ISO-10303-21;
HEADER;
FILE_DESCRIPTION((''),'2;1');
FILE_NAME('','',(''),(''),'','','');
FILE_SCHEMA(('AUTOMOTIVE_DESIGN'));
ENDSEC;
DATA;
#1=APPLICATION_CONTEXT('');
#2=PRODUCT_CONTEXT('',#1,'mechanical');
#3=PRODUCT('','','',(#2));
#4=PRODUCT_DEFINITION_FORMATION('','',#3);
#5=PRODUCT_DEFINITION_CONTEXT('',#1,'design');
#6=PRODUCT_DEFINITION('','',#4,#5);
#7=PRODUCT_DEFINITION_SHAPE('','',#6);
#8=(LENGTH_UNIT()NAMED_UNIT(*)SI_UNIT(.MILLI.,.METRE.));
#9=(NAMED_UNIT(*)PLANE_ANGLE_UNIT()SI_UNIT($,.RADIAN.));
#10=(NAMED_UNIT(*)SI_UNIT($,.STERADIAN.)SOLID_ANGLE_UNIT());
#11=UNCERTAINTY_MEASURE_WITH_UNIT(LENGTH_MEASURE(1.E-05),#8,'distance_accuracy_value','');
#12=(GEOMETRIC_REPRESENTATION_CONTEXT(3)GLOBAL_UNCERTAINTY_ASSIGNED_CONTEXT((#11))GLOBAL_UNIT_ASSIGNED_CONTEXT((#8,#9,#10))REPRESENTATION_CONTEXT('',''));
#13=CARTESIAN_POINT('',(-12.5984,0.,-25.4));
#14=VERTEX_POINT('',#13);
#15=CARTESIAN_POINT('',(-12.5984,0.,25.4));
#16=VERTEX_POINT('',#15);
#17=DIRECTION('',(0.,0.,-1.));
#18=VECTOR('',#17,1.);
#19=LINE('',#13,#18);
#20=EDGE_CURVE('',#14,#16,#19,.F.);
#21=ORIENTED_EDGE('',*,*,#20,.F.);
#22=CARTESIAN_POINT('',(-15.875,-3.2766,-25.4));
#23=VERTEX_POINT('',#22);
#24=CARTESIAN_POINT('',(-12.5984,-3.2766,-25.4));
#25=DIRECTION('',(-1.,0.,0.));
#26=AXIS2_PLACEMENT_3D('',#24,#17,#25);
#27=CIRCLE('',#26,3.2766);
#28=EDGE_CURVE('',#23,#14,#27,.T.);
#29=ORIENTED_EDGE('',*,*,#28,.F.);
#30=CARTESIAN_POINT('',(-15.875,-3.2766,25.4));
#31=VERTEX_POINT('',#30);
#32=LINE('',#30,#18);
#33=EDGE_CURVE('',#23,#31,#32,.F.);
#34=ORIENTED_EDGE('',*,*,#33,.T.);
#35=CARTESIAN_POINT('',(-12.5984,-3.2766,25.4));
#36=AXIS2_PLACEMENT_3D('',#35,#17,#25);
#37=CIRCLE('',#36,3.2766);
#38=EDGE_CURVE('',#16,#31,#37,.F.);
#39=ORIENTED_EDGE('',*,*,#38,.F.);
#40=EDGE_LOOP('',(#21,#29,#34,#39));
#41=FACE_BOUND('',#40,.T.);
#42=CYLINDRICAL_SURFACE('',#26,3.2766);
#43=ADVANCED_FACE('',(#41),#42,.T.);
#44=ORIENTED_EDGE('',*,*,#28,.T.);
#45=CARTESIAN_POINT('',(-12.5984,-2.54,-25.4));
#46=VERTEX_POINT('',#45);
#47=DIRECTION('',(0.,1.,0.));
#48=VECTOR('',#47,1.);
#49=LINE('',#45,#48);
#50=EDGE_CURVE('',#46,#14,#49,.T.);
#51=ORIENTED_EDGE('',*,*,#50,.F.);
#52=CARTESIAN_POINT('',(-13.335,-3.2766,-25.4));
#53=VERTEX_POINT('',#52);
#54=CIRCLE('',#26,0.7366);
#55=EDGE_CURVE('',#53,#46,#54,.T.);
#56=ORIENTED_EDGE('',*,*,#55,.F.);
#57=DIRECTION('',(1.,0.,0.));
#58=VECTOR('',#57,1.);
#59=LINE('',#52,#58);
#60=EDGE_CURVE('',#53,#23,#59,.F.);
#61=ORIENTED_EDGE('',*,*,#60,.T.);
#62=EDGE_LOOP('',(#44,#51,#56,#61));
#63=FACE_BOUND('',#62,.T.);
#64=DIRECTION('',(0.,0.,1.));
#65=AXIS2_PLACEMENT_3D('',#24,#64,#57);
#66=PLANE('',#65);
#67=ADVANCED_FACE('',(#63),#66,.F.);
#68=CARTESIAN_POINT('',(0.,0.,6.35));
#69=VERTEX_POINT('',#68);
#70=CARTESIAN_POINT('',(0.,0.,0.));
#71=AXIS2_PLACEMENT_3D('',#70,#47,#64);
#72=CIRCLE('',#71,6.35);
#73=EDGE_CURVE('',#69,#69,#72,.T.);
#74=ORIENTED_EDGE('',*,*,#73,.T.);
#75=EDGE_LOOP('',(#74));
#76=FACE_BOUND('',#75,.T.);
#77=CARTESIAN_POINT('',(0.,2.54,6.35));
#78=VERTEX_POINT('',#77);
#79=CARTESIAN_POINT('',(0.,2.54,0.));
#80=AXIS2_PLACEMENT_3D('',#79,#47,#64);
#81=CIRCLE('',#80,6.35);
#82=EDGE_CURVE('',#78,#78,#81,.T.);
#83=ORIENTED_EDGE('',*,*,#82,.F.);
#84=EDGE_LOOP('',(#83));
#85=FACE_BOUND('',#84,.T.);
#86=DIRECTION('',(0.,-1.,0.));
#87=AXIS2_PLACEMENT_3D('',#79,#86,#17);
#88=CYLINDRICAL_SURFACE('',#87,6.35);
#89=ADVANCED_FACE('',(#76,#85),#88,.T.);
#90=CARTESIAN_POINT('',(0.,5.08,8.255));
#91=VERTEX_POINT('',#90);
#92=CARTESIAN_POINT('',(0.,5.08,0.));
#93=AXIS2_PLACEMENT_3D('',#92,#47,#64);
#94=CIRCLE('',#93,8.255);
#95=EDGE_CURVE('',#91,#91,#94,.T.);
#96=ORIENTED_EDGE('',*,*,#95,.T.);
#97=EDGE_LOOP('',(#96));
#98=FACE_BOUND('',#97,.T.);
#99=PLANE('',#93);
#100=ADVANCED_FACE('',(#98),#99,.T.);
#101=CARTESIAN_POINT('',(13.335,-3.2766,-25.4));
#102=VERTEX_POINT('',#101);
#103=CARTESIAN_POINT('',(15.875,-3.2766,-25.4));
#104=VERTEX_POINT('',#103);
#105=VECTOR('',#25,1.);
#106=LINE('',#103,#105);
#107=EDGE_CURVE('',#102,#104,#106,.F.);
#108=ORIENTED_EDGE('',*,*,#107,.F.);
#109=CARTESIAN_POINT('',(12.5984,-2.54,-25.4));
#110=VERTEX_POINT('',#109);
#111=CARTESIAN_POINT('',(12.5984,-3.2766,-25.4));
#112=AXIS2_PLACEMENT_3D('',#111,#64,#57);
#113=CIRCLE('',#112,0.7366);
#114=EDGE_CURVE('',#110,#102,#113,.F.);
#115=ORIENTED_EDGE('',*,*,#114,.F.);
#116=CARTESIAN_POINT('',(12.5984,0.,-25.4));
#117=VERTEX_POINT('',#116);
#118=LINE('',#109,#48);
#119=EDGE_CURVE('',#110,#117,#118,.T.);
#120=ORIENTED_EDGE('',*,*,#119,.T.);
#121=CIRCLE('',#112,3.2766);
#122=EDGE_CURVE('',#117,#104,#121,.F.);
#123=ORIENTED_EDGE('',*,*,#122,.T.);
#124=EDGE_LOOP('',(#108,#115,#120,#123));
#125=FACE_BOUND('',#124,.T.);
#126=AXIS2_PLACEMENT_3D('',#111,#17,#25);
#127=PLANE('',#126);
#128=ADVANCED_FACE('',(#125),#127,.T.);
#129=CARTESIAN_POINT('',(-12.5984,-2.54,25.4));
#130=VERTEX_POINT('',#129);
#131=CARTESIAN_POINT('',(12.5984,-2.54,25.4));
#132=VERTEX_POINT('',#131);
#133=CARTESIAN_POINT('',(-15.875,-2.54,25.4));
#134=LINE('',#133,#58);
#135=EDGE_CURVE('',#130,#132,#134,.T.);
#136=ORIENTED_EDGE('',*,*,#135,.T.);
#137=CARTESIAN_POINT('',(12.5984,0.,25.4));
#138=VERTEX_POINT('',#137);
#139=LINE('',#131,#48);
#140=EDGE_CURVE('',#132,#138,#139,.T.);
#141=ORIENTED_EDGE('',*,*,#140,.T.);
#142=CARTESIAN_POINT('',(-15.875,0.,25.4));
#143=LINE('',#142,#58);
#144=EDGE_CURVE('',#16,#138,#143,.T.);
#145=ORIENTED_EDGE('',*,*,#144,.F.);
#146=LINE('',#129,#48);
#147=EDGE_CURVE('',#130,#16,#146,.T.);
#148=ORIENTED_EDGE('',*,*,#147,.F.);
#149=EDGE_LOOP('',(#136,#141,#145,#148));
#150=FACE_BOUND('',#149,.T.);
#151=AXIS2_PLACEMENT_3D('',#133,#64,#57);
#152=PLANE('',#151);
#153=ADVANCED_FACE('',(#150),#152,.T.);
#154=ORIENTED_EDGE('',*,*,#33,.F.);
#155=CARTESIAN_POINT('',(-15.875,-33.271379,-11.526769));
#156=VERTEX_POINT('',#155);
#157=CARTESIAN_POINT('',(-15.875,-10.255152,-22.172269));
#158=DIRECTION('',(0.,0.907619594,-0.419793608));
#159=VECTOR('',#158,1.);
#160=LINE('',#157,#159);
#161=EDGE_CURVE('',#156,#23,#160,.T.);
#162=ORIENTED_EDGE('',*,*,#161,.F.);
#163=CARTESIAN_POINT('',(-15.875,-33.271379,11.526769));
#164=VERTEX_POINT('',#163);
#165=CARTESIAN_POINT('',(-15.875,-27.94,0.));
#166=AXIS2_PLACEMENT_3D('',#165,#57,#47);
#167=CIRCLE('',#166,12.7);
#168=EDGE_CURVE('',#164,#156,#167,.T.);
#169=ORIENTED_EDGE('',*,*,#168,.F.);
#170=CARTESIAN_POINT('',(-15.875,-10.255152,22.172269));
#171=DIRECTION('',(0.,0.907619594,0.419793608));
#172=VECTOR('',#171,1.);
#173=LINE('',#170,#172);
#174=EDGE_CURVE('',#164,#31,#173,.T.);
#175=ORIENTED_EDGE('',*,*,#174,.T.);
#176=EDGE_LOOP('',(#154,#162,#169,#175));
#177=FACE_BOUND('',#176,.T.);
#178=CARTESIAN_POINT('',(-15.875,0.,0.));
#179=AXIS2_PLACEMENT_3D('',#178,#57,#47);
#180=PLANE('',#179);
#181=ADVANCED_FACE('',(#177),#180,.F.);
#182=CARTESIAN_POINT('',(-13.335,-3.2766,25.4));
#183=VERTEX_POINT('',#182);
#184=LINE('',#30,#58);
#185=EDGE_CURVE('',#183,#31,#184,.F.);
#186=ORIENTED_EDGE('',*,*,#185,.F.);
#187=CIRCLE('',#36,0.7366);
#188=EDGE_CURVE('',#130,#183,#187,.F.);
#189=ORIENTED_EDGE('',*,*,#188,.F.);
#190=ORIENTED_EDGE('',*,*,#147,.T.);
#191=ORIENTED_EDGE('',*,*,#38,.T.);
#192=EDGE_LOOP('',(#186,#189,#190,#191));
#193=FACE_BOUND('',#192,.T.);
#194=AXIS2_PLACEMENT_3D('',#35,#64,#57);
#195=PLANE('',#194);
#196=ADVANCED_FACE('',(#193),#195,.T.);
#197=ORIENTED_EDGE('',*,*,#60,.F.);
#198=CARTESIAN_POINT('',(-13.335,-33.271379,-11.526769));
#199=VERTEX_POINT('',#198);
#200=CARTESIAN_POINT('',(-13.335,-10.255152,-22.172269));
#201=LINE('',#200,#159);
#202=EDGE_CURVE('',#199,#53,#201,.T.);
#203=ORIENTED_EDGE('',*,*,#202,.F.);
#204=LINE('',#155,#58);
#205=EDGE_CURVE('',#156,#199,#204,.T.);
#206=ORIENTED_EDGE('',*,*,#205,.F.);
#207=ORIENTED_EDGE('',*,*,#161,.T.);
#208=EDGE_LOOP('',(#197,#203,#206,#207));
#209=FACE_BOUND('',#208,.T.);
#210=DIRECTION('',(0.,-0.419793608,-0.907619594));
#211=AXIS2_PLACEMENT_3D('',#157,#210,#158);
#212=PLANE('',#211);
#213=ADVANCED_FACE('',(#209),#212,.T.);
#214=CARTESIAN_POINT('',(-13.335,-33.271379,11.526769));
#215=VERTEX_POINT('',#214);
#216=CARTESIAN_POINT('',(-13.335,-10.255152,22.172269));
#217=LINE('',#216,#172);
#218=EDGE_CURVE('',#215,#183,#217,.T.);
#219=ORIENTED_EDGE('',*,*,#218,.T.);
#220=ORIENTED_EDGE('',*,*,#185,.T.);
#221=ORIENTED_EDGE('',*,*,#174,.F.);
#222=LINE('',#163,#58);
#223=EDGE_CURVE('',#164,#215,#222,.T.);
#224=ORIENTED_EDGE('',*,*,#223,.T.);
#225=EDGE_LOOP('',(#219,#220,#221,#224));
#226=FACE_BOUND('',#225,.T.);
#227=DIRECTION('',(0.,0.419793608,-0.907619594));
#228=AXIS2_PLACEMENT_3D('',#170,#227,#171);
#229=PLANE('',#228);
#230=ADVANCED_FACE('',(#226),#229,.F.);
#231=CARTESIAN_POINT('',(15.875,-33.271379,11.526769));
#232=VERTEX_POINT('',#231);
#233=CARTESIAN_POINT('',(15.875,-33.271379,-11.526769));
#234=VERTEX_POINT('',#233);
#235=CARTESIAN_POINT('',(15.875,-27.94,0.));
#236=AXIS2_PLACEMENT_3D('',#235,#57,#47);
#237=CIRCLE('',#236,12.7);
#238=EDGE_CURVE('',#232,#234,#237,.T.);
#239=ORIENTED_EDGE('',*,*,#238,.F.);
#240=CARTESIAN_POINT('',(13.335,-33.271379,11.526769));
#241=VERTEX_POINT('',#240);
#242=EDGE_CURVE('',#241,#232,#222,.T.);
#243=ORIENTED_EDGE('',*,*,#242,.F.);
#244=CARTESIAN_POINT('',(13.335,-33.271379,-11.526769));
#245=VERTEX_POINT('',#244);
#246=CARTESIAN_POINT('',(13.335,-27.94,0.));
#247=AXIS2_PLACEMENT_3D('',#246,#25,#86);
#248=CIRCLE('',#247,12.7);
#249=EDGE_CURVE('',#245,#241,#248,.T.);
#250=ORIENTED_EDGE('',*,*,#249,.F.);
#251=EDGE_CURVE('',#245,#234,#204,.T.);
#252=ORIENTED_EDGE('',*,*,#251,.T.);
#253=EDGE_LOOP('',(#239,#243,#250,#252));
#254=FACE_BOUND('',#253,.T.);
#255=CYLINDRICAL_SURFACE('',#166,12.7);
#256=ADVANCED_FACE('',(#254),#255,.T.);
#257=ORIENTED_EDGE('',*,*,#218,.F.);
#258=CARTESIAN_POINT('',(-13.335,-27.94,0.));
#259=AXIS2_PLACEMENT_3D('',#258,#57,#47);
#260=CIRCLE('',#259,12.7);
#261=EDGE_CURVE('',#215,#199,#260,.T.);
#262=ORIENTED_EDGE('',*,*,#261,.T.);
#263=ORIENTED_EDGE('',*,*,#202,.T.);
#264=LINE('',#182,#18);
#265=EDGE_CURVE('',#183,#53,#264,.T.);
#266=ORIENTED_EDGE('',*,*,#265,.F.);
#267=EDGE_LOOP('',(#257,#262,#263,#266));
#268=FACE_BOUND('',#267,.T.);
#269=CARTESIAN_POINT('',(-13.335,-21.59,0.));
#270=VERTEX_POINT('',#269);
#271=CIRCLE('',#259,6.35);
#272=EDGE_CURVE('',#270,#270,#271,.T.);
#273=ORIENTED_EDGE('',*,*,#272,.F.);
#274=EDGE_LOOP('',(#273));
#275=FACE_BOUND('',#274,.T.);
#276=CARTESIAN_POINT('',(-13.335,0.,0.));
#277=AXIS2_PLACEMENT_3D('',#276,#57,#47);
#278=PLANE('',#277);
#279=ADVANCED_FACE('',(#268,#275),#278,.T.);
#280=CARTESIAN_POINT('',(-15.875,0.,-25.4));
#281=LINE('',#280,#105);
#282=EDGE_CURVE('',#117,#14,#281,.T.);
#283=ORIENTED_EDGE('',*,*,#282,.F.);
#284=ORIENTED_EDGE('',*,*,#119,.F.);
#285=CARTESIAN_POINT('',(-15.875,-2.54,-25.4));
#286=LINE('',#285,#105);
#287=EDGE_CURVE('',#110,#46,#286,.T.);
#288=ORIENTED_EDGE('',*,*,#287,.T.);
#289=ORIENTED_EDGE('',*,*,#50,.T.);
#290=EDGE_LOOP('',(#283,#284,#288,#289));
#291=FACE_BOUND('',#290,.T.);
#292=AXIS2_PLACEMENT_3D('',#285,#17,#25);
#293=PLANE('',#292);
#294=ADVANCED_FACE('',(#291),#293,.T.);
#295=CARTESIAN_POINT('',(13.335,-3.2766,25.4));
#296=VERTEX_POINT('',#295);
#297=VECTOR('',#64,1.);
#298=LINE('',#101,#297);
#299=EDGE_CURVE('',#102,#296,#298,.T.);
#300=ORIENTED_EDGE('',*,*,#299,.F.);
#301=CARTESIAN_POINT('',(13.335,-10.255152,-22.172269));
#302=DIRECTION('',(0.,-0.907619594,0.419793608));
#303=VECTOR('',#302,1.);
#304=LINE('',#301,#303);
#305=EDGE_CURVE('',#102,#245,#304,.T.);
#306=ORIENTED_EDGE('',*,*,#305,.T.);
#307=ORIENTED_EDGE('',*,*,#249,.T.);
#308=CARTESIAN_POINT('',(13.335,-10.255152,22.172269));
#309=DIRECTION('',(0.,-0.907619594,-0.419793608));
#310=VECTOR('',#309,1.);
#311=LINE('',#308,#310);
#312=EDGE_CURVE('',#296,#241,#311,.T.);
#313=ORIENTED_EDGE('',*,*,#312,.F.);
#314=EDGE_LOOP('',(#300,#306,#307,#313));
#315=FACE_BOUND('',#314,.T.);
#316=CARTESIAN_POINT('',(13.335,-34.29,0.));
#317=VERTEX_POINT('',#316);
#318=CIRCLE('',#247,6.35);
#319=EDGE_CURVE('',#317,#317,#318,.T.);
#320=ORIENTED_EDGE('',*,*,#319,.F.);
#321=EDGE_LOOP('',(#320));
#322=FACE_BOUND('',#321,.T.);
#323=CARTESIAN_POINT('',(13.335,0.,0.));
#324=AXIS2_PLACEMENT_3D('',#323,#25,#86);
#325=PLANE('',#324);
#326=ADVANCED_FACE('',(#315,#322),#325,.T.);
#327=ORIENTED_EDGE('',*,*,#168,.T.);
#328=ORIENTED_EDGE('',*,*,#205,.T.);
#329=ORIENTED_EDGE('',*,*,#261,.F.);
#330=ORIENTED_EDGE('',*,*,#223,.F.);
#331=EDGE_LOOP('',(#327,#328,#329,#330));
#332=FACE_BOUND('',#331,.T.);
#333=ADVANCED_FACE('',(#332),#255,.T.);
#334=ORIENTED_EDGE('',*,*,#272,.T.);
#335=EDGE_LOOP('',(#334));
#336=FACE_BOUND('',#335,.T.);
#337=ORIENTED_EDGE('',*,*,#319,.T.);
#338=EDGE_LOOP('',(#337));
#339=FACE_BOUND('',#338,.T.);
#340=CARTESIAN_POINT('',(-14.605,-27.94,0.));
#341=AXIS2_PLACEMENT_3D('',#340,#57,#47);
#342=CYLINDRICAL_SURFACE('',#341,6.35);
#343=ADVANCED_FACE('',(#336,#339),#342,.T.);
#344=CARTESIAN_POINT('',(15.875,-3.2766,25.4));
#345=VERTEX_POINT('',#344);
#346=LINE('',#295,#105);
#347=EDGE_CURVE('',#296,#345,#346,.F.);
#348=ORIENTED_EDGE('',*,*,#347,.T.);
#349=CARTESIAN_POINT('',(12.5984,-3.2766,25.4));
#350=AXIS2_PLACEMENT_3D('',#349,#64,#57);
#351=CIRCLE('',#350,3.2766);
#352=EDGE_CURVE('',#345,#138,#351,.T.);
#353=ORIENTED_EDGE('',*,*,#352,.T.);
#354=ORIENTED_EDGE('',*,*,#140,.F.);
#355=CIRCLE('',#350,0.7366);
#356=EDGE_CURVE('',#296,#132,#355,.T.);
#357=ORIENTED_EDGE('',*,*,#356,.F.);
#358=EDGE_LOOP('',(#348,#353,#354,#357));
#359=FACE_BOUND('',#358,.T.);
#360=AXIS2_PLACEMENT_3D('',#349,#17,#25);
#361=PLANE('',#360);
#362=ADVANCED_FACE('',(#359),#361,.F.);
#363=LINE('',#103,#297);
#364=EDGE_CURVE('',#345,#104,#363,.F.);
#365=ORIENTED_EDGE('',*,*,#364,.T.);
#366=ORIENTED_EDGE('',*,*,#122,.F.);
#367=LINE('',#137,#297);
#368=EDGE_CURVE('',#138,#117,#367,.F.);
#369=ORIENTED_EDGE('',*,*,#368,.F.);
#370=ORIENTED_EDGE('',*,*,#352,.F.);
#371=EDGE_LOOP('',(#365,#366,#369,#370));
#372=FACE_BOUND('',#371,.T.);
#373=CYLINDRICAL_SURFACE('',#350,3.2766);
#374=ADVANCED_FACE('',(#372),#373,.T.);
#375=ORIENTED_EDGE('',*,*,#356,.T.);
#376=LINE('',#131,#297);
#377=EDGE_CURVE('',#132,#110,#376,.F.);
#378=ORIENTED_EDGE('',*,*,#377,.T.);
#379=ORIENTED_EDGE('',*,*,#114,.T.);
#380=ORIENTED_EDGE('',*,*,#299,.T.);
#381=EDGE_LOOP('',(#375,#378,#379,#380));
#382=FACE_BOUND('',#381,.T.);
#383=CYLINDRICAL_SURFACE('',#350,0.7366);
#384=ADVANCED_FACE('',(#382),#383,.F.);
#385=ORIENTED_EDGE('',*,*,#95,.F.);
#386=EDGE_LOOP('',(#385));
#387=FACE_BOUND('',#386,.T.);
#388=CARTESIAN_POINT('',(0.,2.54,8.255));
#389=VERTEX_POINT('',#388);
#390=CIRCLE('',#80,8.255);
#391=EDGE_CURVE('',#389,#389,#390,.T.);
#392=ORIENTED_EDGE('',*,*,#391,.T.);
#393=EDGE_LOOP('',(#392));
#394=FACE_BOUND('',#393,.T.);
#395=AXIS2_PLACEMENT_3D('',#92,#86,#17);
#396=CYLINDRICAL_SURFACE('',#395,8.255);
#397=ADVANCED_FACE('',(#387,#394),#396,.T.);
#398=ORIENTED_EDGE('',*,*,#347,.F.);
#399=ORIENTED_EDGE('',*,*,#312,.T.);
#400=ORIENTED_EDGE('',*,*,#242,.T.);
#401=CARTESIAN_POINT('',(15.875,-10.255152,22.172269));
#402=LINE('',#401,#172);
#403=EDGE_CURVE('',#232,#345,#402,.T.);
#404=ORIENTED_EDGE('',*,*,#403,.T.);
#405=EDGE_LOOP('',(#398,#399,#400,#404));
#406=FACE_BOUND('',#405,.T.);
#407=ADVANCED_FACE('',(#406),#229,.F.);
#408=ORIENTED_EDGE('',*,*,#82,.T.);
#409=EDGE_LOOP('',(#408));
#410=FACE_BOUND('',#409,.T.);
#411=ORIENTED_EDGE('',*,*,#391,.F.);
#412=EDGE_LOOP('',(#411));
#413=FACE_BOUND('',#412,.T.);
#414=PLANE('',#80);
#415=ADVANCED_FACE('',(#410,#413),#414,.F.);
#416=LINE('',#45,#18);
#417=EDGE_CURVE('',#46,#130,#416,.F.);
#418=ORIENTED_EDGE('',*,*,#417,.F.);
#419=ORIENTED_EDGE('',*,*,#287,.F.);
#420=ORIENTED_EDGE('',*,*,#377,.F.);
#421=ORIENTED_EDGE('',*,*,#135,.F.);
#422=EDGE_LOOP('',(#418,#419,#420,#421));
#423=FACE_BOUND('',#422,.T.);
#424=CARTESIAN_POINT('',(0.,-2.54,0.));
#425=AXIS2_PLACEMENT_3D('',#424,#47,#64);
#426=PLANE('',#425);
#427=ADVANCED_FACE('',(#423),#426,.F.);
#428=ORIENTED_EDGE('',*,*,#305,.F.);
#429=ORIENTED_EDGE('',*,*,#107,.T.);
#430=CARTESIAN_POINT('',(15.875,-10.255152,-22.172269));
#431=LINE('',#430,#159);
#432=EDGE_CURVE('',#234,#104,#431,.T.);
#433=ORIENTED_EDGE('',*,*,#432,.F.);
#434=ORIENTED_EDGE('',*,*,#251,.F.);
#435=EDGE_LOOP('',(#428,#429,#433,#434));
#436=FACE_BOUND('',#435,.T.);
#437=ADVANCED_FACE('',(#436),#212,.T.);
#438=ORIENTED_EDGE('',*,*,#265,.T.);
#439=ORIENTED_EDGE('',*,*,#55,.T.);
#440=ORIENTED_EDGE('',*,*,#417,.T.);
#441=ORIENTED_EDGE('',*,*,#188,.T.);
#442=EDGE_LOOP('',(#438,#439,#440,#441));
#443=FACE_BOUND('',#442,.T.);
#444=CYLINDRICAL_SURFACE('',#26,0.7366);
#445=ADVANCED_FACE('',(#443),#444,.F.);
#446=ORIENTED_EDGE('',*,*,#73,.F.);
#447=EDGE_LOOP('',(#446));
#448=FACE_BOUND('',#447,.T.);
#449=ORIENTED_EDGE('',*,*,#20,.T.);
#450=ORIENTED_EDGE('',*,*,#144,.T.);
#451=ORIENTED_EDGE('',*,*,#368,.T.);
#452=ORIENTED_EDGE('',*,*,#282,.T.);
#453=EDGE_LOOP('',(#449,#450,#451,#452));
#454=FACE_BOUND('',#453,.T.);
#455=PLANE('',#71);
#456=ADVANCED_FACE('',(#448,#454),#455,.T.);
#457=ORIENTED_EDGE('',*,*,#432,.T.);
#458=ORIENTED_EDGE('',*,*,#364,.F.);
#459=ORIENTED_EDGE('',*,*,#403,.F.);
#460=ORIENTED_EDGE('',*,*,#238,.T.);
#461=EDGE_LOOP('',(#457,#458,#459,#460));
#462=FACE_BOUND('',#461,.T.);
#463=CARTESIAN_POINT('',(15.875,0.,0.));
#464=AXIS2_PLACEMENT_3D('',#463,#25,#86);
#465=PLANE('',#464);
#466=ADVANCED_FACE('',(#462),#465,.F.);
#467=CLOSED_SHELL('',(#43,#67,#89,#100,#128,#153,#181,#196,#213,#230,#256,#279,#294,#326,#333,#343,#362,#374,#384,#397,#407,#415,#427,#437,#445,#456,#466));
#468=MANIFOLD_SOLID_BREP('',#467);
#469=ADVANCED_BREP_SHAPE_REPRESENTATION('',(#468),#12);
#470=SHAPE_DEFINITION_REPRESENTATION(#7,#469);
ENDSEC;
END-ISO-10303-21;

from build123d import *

# Parameters (mm, degrees)
SKETCH2_W                      = 31.75
SKETCH2_H                      = 50.8
BASE_FLANGE1_DEPTH             = 2.54
EDGE_FLANGE1_STRIP_W           = 11.6332
EDGE_FLANGE1_STRIP_H           = 2.54
EDGE_FLANGE1_STRIP_CUT_DEPTH   = 50.8
EDGE_FLANGE1_STRIP_2_W         = 11.6332
EDGE_FLANGE1_STRIP_2_H         = 2.54
EDGE_FLANGE1_STRIP_CUT_2_DEPTH = 50.8
EDGE_FLANGE1_DEPTH             = 50.8
EDGE_FLANGE1_BEND_DEPTH        = 50.8
CUT_EXTRUDE1_DEPTH             = 58.487669113
BOSS_EXTRUDE1_START            = -2.54
SKETCH14_R                     = 6.35
BOSS_EXTRUDE1_DEPTH            = 27.94
SKETCH15_R                     = 6.35
BOSS_EXTRUDE2_DEPTH            = 2.54
SKETCH16_R                     = 8.255
BOSS_EXTRUDE3_DEPTH            = 2.54


# Sheet-metal steps are written as plain solids
with BuildPart() as part:
    # Sketch2 → Base-Flange1 (new body)
    with BuildSketch(Plane(origin=(0, 0, 0), x_dir=(1, 0, 0), z_dir=(0, 1, 0))):
        Rectangle(SKETCH2_W, SKETCH2_H)
    extrude(amount=-BASE_FLANGE1_DEPTH)

    # Edge-Flange1 strip (across the edge) → Edge-Flange1 strip cut (cut)
    with BuildSketch(Plane(origin=(15.875, -2.54, -25.4), x_dir=(-1, 0, 0), z_dir=(0, 0, 1))):
        with Locations((-2.54, -1.27)):
            Rectangle(EDGE_FLANGE1_STRIP_W, EDGE_FLANGE1_STRIP_H)
    extrude(amount=EDGE_FLANGE1_STRIP_CUT_DEPTH, mode=Mode.SUBTRACT)

    # Edge-Flange1 strip 2 (across the edge) → Edge-Flange1 strip cut 2 (cut)
    with BuildSketch(Plane(origin=(-15.875, -2.54, 25.4), x_dir=(1, 0, 0), z_dir=(0, 0, -1))):
        with Locations((-2.54, -1.27)):
            Rectangle(EDGE_FLANGE1_STRIP_2_W, EDGE_FLANGE1_STRIP_2_H)
    extrude(amount=EDGE_FLANGE1_STRIP_CUT_2_DEPTH, mode=Mode.SUBTRACT)

    # Edge-Flange1 section (across the edge) → Edge-Flange1 (add)
    with BuildSketch(Plane(origin=(15.875, -2.54, -25.4), x_dir=(-1, 0, 0), z_dir=(0, 0, 1))):
        with BuildLine():
            Line((0, 0.7366), (0, 38.1))
            Line((0, 38.1), (2.54, 38.1))
            Line((2.54, 38.1), (2.54, 0.7366))
            ThreePointArc((2.54, 0.7366), (2.755745145, 0.215745145), (3.2766, 0))
            Line((3.2766, 0), (3.2766, -2.54))
            ThreePointArc((3.2766, -2.54), (0.959693921, -1.580306079), (0, 0.7366))
        make_face()
    extrude(amount=EDGE_FLANGE1_DEPTH)

    # Edge-Flange1 section 2 (across the edge) → Edge-Flange1 bend (add)
    with BuildSketch(Plane(origin=(-15.875, -2.54, 25.4), x_dir=(1, 0, 0), z_dir=(0, 0, -1))):
        with BuildLine():
            Line((0, 0.7366), (0, 38.1))
            Line((0, 38.1), (2.54, 38.1))
            Line((2.54, 38.1), (2.54, 0.7366))
            ThreePointArc((2.54, 0.7366), (2.755745145, 0.215745145), (3.2766, 0))
            Line((3.2766, 0), (3.2766, -2.54))
            ThreePointArc((3.2766, -2.54), (0.959693921, -1.580306079), (0, 0.7366))
        make_face()
    extrude(amount=EDGE_FLANGE1_BEND_DEPTH)

    # Sketch13 → Cut-Extrude1 (cut, through all)
    with BuildSketch(Plane(origin=(15.875, 0, 0), x_dir=(0, 0, -1), z_dir=(1, 0, 0))):
        with BuildLine():
            Line((-25.4, -40.64), (3e-08, -40.64))
            ThreePointArc((3e-08, -40.64), (-6.840376035, -38.640432501), (-11.526768838, -33.271378824))
            Line((-11.526768838, -33.271378824), (-25.4, -3.2766))
            Line((-25.4, -3.2766), (-25.4, -40.64))
        make_face()
        with BuildLine():
            Line((25.4, -3.2766), (11.526768838, -33.271378824))
            ThreePointArc((11.526768838, -33.271378824), (6.84037606, -38.640432485), (3e-08, -40.64))
            Line((3e-08, -40.64), (25.4, -40.64))
            Line((25.4, -40.64), (25.4, -3.2766))
        make_face()
    extrude(amount=-CUT_EXTRUDE1_DEPTH, mode=Mode.SUBTRACT)

    # Sketch14 → Boss-Extrude1 (add)
    with BuildSketch(Plane(origin=(15.875, 0, 0), x_dir=(0, 0, -1), z_dir=(1, 0, 0)).offset(BOSS_EXTRUDE1_START)):
        with Locations(Location((0, -27.94, 0), (0, 0, 90))):
            Circle(SKETCH14_R)
    extrude(amount=-BOSS_EXTRUDE1_DEPTH)

    # Sketch15 → Boss-Extrude2 (add)
    with BuildSketch(Plane(origin=(0, 0, 0), x_dir=(1, 0, 0), z_dir=(0, 1, 0))):
        with Locations(Location((0, 0, 0), (0, 0, 270))):
            Circle(SKETCH15_R)
    extrude(amount=BOSS_EXTRUDE2_DEPTH)

    # Sketch16 → Boss-Extrude3 (add)
    with BuildSketch(Plane(origin=(0, 2.54, 0), x_dir=(1, 0, 0), z_dir=(0, 1, 0))):
        with Locations(Location((0, 0, 0), (0, 0, 270))):
            Circle(SKETCH16_R)
    extrude(amount=BOSS_EXTRUDE3_DEPTH)


solid = part.part
